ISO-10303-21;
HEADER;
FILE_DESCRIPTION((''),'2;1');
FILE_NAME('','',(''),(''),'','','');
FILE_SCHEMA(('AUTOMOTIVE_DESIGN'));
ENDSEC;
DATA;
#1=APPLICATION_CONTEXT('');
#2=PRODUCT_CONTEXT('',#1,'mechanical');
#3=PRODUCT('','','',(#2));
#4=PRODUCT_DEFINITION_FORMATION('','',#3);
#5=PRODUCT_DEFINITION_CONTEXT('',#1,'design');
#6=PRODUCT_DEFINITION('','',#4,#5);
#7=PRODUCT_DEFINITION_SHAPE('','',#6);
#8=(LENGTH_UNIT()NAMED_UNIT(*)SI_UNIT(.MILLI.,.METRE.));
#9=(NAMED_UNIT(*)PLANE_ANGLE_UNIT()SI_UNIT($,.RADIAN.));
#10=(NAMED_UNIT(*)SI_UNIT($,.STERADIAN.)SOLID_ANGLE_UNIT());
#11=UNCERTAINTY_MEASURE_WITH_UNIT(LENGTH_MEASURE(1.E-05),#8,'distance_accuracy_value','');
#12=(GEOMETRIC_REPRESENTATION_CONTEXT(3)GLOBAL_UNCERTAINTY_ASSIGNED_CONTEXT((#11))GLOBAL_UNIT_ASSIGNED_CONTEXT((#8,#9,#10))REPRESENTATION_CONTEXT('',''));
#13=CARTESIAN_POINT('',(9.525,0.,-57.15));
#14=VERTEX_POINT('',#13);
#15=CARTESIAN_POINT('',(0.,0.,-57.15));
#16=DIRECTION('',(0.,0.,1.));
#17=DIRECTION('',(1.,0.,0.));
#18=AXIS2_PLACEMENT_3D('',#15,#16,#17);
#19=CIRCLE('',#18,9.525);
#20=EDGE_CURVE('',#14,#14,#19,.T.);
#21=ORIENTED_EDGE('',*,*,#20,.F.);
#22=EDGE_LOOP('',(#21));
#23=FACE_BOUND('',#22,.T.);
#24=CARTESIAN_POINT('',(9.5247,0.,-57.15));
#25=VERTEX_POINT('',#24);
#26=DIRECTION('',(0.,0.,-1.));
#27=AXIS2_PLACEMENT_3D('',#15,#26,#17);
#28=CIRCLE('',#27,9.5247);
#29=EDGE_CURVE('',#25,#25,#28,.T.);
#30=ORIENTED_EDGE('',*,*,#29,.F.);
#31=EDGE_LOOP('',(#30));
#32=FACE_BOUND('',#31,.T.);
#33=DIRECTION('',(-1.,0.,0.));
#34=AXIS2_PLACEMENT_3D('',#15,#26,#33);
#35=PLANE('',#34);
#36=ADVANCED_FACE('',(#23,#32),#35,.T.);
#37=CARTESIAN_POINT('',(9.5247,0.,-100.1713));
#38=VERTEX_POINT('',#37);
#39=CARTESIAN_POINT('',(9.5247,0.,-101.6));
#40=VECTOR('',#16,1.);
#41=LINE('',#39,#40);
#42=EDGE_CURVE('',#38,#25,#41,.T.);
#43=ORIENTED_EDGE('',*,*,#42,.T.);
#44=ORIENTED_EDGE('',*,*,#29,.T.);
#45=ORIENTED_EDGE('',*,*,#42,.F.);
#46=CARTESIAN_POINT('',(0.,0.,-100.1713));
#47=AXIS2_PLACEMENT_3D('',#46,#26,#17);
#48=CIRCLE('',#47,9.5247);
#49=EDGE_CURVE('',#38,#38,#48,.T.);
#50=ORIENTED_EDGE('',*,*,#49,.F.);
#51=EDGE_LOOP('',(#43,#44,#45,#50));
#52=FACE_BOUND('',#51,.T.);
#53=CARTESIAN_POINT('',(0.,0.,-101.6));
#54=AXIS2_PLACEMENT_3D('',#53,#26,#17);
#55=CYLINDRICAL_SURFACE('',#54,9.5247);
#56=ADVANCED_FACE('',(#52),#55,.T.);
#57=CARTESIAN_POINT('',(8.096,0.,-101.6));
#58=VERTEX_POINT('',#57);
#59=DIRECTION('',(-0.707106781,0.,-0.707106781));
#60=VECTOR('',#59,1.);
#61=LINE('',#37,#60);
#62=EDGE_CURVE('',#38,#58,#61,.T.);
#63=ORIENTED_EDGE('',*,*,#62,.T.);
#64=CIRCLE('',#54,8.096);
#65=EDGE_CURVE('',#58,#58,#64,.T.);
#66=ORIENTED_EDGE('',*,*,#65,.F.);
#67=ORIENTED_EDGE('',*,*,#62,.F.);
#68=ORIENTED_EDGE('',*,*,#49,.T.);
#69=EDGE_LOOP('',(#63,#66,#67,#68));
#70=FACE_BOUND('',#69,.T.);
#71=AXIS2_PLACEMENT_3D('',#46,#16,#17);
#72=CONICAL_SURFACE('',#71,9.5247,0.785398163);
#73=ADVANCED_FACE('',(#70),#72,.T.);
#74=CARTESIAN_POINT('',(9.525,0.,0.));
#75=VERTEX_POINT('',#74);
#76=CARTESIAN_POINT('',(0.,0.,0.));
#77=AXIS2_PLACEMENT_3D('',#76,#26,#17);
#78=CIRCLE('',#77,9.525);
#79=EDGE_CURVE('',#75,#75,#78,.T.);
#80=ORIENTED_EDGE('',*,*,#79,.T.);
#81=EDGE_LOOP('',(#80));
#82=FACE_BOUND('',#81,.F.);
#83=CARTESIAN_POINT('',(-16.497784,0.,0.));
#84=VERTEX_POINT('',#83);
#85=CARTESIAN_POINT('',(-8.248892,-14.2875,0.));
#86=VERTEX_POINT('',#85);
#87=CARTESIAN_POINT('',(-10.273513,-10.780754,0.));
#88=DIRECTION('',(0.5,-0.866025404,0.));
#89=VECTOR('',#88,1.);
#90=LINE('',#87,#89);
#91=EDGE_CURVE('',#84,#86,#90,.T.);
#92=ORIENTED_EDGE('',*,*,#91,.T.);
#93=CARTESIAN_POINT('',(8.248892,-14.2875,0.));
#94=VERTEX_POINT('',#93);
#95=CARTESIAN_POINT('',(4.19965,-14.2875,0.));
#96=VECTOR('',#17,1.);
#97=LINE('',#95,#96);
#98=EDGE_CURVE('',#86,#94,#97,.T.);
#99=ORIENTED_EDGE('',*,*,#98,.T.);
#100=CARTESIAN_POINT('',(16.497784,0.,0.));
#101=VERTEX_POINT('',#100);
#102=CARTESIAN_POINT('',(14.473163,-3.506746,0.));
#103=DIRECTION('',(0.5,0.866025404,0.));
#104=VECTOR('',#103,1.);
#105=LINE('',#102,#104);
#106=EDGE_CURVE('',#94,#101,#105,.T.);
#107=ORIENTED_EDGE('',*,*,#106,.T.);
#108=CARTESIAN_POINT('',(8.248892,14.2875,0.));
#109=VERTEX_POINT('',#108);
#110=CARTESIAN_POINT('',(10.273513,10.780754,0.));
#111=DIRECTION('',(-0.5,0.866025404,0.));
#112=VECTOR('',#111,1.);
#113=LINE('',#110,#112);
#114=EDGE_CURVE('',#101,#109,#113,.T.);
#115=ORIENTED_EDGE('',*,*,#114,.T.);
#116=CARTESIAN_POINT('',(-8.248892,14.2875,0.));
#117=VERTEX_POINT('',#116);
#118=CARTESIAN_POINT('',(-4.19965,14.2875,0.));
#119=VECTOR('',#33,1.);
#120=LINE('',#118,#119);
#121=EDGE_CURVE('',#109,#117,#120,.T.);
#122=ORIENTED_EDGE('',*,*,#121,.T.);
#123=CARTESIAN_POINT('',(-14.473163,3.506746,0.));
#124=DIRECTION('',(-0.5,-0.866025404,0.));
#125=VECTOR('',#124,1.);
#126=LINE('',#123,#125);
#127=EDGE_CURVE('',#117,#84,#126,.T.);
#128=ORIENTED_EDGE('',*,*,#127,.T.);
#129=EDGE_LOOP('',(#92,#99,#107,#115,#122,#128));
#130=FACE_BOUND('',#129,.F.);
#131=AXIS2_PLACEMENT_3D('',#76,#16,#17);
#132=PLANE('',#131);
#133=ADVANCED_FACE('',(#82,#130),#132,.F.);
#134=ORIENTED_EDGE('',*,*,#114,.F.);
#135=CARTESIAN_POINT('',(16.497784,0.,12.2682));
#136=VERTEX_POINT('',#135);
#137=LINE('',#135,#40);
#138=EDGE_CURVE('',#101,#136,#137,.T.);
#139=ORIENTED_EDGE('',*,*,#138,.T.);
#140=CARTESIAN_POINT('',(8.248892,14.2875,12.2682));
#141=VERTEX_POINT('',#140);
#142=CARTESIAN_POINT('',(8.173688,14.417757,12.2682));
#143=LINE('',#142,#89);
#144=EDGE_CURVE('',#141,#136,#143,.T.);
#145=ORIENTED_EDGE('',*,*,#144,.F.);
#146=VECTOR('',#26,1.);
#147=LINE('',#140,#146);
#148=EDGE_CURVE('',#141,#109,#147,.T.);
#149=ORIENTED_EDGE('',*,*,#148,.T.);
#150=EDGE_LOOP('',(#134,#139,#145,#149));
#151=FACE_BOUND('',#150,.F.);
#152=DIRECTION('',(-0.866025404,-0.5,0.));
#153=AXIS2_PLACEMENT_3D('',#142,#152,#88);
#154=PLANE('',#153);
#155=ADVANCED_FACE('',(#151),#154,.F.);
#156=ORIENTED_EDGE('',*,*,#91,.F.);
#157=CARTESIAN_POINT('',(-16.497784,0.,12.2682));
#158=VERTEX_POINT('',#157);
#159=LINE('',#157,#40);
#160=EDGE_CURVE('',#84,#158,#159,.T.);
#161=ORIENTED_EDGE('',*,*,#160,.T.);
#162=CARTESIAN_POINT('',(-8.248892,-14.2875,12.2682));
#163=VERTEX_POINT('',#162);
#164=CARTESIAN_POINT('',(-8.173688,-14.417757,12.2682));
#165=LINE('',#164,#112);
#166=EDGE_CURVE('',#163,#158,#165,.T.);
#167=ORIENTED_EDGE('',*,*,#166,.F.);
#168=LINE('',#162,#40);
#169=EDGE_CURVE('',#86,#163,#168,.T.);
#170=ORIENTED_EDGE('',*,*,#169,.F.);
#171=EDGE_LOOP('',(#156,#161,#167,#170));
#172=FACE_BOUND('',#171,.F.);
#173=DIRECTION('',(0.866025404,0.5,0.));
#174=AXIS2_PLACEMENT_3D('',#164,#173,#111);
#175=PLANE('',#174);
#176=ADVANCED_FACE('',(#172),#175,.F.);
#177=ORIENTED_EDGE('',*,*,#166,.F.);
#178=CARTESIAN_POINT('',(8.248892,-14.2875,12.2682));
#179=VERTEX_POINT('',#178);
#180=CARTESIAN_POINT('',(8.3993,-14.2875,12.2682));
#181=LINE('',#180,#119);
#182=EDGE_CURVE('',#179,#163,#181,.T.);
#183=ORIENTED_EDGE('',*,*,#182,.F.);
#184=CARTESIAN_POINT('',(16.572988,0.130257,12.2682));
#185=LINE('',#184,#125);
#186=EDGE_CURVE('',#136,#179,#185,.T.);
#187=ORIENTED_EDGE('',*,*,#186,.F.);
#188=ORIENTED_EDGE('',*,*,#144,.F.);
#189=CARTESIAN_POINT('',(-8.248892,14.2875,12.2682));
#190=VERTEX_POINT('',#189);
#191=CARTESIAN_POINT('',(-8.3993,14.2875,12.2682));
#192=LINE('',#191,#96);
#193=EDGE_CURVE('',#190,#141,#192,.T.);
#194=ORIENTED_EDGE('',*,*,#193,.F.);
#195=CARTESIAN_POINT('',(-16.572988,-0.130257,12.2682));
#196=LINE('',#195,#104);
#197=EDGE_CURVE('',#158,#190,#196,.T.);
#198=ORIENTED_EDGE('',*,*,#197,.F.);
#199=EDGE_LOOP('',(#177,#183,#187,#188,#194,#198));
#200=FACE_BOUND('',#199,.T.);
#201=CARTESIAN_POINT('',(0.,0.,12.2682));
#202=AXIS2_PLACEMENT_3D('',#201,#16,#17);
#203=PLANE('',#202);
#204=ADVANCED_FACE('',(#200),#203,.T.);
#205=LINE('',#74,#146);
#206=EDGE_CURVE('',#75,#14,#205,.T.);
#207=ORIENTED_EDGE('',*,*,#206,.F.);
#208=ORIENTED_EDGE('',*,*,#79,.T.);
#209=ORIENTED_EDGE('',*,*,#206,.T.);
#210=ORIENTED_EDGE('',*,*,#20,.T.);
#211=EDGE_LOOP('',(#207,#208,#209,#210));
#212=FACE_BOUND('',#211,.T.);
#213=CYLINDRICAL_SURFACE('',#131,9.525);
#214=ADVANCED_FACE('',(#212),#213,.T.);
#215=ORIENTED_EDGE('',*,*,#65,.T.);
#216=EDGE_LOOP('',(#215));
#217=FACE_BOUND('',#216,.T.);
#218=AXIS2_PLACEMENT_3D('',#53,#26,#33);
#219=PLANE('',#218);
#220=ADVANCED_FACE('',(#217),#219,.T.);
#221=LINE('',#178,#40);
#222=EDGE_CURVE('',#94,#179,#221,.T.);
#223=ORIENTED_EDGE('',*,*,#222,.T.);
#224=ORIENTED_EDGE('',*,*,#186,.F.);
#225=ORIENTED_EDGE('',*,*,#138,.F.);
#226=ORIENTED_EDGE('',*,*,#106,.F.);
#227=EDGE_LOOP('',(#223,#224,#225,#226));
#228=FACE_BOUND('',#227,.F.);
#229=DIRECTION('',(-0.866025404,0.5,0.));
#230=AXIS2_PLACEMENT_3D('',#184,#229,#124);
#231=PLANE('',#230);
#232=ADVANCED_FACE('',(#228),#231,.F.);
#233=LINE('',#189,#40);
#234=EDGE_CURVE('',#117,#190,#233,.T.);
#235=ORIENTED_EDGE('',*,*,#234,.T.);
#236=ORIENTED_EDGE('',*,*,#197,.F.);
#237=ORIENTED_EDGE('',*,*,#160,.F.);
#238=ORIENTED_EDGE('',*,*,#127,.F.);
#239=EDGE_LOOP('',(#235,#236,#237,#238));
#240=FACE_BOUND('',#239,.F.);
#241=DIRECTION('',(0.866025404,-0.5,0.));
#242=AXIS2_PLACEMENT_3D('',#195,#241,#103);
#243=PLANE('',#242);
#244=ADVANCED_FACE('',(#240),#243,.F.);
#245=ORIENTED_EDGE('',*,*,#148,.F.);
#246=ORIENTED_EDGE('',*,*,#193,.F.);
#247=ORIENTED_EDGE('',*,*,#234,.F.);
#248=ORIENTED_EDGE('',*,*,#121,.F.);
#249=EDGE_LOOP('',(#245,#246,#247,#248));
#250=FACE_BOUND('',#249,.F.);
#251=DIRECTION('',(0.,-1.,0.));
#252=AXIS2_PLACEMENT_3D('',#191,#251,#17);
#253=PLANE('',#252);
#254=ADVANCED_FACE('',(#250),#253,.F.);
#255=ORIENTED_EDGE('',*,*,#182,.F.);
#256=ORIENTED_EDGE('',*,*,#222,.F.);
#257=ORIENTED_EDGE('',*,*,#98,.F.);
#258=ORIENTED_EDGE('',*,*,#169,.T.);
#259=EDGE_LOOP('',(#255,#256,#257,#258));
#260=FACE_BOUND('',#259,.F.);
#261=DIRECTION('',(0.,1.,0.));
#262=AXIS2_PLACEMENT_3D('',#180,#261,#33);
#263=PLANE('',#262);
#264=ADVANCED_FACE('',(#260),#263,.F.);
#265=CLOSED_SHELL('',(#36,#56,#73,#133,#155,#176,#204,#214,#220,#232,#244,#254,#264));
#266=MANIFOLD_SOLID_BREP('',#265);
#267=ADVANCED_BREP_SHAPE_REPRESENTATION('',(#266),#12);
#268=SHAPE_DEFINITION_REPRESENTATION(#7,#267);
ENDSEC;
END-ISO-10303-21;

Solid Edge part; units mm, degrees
sketch "Sketch1" plane through (0, 0, 0) normal (0, 0, 1) x (1, 0, 0)
  circle A0 centre (0, 0) radius 16.5735
  dimension "D1" = 33.147
extrude "Protrusion1" add sketch "Sketch1" along normal blind 12.2682
sketch "Sketch2" plane through (0, 0, 0) normal (0, 0, -1) x (1, 0, 0)
  circle A0 centre (0, 0) radius 9.525
extrude "Protrusion2" add sketch "Sketch2" along normal blind 101.6
sketch "Sketch3" plane through (0, 0, -101.6) normal (0, 0, -1) x (1, 0, 0)
  circle A0 centre (0, 0) radius 9.5247
extrude "Cutout1" cut sketch "Sketch3" against normal blind 44.45 flip side to cut
chamfer "Chamfer_1" distance 1.4287 angle 45 1 edges at (-9.5247, 0, -101.6)
sketch "Sketch4" plane through (0, 0, 12.2682) normal (0, 0, 1) x (1, 0, 0)
  line L0 (-8.3993, 14.2875) -> (8.3993, 14.2875)
  dimension "D1" = 28.575
extrude "Cutout2" cut sketch "Sketch4" against normal up to next material side at (0, 14.3375, 12.2682)
pattern_circular "Pattern1" count 6 over 360 about axis through (0, 0, 12.2682) along (0, 0, 1) of "Cutout2"
properties part number "107190"
